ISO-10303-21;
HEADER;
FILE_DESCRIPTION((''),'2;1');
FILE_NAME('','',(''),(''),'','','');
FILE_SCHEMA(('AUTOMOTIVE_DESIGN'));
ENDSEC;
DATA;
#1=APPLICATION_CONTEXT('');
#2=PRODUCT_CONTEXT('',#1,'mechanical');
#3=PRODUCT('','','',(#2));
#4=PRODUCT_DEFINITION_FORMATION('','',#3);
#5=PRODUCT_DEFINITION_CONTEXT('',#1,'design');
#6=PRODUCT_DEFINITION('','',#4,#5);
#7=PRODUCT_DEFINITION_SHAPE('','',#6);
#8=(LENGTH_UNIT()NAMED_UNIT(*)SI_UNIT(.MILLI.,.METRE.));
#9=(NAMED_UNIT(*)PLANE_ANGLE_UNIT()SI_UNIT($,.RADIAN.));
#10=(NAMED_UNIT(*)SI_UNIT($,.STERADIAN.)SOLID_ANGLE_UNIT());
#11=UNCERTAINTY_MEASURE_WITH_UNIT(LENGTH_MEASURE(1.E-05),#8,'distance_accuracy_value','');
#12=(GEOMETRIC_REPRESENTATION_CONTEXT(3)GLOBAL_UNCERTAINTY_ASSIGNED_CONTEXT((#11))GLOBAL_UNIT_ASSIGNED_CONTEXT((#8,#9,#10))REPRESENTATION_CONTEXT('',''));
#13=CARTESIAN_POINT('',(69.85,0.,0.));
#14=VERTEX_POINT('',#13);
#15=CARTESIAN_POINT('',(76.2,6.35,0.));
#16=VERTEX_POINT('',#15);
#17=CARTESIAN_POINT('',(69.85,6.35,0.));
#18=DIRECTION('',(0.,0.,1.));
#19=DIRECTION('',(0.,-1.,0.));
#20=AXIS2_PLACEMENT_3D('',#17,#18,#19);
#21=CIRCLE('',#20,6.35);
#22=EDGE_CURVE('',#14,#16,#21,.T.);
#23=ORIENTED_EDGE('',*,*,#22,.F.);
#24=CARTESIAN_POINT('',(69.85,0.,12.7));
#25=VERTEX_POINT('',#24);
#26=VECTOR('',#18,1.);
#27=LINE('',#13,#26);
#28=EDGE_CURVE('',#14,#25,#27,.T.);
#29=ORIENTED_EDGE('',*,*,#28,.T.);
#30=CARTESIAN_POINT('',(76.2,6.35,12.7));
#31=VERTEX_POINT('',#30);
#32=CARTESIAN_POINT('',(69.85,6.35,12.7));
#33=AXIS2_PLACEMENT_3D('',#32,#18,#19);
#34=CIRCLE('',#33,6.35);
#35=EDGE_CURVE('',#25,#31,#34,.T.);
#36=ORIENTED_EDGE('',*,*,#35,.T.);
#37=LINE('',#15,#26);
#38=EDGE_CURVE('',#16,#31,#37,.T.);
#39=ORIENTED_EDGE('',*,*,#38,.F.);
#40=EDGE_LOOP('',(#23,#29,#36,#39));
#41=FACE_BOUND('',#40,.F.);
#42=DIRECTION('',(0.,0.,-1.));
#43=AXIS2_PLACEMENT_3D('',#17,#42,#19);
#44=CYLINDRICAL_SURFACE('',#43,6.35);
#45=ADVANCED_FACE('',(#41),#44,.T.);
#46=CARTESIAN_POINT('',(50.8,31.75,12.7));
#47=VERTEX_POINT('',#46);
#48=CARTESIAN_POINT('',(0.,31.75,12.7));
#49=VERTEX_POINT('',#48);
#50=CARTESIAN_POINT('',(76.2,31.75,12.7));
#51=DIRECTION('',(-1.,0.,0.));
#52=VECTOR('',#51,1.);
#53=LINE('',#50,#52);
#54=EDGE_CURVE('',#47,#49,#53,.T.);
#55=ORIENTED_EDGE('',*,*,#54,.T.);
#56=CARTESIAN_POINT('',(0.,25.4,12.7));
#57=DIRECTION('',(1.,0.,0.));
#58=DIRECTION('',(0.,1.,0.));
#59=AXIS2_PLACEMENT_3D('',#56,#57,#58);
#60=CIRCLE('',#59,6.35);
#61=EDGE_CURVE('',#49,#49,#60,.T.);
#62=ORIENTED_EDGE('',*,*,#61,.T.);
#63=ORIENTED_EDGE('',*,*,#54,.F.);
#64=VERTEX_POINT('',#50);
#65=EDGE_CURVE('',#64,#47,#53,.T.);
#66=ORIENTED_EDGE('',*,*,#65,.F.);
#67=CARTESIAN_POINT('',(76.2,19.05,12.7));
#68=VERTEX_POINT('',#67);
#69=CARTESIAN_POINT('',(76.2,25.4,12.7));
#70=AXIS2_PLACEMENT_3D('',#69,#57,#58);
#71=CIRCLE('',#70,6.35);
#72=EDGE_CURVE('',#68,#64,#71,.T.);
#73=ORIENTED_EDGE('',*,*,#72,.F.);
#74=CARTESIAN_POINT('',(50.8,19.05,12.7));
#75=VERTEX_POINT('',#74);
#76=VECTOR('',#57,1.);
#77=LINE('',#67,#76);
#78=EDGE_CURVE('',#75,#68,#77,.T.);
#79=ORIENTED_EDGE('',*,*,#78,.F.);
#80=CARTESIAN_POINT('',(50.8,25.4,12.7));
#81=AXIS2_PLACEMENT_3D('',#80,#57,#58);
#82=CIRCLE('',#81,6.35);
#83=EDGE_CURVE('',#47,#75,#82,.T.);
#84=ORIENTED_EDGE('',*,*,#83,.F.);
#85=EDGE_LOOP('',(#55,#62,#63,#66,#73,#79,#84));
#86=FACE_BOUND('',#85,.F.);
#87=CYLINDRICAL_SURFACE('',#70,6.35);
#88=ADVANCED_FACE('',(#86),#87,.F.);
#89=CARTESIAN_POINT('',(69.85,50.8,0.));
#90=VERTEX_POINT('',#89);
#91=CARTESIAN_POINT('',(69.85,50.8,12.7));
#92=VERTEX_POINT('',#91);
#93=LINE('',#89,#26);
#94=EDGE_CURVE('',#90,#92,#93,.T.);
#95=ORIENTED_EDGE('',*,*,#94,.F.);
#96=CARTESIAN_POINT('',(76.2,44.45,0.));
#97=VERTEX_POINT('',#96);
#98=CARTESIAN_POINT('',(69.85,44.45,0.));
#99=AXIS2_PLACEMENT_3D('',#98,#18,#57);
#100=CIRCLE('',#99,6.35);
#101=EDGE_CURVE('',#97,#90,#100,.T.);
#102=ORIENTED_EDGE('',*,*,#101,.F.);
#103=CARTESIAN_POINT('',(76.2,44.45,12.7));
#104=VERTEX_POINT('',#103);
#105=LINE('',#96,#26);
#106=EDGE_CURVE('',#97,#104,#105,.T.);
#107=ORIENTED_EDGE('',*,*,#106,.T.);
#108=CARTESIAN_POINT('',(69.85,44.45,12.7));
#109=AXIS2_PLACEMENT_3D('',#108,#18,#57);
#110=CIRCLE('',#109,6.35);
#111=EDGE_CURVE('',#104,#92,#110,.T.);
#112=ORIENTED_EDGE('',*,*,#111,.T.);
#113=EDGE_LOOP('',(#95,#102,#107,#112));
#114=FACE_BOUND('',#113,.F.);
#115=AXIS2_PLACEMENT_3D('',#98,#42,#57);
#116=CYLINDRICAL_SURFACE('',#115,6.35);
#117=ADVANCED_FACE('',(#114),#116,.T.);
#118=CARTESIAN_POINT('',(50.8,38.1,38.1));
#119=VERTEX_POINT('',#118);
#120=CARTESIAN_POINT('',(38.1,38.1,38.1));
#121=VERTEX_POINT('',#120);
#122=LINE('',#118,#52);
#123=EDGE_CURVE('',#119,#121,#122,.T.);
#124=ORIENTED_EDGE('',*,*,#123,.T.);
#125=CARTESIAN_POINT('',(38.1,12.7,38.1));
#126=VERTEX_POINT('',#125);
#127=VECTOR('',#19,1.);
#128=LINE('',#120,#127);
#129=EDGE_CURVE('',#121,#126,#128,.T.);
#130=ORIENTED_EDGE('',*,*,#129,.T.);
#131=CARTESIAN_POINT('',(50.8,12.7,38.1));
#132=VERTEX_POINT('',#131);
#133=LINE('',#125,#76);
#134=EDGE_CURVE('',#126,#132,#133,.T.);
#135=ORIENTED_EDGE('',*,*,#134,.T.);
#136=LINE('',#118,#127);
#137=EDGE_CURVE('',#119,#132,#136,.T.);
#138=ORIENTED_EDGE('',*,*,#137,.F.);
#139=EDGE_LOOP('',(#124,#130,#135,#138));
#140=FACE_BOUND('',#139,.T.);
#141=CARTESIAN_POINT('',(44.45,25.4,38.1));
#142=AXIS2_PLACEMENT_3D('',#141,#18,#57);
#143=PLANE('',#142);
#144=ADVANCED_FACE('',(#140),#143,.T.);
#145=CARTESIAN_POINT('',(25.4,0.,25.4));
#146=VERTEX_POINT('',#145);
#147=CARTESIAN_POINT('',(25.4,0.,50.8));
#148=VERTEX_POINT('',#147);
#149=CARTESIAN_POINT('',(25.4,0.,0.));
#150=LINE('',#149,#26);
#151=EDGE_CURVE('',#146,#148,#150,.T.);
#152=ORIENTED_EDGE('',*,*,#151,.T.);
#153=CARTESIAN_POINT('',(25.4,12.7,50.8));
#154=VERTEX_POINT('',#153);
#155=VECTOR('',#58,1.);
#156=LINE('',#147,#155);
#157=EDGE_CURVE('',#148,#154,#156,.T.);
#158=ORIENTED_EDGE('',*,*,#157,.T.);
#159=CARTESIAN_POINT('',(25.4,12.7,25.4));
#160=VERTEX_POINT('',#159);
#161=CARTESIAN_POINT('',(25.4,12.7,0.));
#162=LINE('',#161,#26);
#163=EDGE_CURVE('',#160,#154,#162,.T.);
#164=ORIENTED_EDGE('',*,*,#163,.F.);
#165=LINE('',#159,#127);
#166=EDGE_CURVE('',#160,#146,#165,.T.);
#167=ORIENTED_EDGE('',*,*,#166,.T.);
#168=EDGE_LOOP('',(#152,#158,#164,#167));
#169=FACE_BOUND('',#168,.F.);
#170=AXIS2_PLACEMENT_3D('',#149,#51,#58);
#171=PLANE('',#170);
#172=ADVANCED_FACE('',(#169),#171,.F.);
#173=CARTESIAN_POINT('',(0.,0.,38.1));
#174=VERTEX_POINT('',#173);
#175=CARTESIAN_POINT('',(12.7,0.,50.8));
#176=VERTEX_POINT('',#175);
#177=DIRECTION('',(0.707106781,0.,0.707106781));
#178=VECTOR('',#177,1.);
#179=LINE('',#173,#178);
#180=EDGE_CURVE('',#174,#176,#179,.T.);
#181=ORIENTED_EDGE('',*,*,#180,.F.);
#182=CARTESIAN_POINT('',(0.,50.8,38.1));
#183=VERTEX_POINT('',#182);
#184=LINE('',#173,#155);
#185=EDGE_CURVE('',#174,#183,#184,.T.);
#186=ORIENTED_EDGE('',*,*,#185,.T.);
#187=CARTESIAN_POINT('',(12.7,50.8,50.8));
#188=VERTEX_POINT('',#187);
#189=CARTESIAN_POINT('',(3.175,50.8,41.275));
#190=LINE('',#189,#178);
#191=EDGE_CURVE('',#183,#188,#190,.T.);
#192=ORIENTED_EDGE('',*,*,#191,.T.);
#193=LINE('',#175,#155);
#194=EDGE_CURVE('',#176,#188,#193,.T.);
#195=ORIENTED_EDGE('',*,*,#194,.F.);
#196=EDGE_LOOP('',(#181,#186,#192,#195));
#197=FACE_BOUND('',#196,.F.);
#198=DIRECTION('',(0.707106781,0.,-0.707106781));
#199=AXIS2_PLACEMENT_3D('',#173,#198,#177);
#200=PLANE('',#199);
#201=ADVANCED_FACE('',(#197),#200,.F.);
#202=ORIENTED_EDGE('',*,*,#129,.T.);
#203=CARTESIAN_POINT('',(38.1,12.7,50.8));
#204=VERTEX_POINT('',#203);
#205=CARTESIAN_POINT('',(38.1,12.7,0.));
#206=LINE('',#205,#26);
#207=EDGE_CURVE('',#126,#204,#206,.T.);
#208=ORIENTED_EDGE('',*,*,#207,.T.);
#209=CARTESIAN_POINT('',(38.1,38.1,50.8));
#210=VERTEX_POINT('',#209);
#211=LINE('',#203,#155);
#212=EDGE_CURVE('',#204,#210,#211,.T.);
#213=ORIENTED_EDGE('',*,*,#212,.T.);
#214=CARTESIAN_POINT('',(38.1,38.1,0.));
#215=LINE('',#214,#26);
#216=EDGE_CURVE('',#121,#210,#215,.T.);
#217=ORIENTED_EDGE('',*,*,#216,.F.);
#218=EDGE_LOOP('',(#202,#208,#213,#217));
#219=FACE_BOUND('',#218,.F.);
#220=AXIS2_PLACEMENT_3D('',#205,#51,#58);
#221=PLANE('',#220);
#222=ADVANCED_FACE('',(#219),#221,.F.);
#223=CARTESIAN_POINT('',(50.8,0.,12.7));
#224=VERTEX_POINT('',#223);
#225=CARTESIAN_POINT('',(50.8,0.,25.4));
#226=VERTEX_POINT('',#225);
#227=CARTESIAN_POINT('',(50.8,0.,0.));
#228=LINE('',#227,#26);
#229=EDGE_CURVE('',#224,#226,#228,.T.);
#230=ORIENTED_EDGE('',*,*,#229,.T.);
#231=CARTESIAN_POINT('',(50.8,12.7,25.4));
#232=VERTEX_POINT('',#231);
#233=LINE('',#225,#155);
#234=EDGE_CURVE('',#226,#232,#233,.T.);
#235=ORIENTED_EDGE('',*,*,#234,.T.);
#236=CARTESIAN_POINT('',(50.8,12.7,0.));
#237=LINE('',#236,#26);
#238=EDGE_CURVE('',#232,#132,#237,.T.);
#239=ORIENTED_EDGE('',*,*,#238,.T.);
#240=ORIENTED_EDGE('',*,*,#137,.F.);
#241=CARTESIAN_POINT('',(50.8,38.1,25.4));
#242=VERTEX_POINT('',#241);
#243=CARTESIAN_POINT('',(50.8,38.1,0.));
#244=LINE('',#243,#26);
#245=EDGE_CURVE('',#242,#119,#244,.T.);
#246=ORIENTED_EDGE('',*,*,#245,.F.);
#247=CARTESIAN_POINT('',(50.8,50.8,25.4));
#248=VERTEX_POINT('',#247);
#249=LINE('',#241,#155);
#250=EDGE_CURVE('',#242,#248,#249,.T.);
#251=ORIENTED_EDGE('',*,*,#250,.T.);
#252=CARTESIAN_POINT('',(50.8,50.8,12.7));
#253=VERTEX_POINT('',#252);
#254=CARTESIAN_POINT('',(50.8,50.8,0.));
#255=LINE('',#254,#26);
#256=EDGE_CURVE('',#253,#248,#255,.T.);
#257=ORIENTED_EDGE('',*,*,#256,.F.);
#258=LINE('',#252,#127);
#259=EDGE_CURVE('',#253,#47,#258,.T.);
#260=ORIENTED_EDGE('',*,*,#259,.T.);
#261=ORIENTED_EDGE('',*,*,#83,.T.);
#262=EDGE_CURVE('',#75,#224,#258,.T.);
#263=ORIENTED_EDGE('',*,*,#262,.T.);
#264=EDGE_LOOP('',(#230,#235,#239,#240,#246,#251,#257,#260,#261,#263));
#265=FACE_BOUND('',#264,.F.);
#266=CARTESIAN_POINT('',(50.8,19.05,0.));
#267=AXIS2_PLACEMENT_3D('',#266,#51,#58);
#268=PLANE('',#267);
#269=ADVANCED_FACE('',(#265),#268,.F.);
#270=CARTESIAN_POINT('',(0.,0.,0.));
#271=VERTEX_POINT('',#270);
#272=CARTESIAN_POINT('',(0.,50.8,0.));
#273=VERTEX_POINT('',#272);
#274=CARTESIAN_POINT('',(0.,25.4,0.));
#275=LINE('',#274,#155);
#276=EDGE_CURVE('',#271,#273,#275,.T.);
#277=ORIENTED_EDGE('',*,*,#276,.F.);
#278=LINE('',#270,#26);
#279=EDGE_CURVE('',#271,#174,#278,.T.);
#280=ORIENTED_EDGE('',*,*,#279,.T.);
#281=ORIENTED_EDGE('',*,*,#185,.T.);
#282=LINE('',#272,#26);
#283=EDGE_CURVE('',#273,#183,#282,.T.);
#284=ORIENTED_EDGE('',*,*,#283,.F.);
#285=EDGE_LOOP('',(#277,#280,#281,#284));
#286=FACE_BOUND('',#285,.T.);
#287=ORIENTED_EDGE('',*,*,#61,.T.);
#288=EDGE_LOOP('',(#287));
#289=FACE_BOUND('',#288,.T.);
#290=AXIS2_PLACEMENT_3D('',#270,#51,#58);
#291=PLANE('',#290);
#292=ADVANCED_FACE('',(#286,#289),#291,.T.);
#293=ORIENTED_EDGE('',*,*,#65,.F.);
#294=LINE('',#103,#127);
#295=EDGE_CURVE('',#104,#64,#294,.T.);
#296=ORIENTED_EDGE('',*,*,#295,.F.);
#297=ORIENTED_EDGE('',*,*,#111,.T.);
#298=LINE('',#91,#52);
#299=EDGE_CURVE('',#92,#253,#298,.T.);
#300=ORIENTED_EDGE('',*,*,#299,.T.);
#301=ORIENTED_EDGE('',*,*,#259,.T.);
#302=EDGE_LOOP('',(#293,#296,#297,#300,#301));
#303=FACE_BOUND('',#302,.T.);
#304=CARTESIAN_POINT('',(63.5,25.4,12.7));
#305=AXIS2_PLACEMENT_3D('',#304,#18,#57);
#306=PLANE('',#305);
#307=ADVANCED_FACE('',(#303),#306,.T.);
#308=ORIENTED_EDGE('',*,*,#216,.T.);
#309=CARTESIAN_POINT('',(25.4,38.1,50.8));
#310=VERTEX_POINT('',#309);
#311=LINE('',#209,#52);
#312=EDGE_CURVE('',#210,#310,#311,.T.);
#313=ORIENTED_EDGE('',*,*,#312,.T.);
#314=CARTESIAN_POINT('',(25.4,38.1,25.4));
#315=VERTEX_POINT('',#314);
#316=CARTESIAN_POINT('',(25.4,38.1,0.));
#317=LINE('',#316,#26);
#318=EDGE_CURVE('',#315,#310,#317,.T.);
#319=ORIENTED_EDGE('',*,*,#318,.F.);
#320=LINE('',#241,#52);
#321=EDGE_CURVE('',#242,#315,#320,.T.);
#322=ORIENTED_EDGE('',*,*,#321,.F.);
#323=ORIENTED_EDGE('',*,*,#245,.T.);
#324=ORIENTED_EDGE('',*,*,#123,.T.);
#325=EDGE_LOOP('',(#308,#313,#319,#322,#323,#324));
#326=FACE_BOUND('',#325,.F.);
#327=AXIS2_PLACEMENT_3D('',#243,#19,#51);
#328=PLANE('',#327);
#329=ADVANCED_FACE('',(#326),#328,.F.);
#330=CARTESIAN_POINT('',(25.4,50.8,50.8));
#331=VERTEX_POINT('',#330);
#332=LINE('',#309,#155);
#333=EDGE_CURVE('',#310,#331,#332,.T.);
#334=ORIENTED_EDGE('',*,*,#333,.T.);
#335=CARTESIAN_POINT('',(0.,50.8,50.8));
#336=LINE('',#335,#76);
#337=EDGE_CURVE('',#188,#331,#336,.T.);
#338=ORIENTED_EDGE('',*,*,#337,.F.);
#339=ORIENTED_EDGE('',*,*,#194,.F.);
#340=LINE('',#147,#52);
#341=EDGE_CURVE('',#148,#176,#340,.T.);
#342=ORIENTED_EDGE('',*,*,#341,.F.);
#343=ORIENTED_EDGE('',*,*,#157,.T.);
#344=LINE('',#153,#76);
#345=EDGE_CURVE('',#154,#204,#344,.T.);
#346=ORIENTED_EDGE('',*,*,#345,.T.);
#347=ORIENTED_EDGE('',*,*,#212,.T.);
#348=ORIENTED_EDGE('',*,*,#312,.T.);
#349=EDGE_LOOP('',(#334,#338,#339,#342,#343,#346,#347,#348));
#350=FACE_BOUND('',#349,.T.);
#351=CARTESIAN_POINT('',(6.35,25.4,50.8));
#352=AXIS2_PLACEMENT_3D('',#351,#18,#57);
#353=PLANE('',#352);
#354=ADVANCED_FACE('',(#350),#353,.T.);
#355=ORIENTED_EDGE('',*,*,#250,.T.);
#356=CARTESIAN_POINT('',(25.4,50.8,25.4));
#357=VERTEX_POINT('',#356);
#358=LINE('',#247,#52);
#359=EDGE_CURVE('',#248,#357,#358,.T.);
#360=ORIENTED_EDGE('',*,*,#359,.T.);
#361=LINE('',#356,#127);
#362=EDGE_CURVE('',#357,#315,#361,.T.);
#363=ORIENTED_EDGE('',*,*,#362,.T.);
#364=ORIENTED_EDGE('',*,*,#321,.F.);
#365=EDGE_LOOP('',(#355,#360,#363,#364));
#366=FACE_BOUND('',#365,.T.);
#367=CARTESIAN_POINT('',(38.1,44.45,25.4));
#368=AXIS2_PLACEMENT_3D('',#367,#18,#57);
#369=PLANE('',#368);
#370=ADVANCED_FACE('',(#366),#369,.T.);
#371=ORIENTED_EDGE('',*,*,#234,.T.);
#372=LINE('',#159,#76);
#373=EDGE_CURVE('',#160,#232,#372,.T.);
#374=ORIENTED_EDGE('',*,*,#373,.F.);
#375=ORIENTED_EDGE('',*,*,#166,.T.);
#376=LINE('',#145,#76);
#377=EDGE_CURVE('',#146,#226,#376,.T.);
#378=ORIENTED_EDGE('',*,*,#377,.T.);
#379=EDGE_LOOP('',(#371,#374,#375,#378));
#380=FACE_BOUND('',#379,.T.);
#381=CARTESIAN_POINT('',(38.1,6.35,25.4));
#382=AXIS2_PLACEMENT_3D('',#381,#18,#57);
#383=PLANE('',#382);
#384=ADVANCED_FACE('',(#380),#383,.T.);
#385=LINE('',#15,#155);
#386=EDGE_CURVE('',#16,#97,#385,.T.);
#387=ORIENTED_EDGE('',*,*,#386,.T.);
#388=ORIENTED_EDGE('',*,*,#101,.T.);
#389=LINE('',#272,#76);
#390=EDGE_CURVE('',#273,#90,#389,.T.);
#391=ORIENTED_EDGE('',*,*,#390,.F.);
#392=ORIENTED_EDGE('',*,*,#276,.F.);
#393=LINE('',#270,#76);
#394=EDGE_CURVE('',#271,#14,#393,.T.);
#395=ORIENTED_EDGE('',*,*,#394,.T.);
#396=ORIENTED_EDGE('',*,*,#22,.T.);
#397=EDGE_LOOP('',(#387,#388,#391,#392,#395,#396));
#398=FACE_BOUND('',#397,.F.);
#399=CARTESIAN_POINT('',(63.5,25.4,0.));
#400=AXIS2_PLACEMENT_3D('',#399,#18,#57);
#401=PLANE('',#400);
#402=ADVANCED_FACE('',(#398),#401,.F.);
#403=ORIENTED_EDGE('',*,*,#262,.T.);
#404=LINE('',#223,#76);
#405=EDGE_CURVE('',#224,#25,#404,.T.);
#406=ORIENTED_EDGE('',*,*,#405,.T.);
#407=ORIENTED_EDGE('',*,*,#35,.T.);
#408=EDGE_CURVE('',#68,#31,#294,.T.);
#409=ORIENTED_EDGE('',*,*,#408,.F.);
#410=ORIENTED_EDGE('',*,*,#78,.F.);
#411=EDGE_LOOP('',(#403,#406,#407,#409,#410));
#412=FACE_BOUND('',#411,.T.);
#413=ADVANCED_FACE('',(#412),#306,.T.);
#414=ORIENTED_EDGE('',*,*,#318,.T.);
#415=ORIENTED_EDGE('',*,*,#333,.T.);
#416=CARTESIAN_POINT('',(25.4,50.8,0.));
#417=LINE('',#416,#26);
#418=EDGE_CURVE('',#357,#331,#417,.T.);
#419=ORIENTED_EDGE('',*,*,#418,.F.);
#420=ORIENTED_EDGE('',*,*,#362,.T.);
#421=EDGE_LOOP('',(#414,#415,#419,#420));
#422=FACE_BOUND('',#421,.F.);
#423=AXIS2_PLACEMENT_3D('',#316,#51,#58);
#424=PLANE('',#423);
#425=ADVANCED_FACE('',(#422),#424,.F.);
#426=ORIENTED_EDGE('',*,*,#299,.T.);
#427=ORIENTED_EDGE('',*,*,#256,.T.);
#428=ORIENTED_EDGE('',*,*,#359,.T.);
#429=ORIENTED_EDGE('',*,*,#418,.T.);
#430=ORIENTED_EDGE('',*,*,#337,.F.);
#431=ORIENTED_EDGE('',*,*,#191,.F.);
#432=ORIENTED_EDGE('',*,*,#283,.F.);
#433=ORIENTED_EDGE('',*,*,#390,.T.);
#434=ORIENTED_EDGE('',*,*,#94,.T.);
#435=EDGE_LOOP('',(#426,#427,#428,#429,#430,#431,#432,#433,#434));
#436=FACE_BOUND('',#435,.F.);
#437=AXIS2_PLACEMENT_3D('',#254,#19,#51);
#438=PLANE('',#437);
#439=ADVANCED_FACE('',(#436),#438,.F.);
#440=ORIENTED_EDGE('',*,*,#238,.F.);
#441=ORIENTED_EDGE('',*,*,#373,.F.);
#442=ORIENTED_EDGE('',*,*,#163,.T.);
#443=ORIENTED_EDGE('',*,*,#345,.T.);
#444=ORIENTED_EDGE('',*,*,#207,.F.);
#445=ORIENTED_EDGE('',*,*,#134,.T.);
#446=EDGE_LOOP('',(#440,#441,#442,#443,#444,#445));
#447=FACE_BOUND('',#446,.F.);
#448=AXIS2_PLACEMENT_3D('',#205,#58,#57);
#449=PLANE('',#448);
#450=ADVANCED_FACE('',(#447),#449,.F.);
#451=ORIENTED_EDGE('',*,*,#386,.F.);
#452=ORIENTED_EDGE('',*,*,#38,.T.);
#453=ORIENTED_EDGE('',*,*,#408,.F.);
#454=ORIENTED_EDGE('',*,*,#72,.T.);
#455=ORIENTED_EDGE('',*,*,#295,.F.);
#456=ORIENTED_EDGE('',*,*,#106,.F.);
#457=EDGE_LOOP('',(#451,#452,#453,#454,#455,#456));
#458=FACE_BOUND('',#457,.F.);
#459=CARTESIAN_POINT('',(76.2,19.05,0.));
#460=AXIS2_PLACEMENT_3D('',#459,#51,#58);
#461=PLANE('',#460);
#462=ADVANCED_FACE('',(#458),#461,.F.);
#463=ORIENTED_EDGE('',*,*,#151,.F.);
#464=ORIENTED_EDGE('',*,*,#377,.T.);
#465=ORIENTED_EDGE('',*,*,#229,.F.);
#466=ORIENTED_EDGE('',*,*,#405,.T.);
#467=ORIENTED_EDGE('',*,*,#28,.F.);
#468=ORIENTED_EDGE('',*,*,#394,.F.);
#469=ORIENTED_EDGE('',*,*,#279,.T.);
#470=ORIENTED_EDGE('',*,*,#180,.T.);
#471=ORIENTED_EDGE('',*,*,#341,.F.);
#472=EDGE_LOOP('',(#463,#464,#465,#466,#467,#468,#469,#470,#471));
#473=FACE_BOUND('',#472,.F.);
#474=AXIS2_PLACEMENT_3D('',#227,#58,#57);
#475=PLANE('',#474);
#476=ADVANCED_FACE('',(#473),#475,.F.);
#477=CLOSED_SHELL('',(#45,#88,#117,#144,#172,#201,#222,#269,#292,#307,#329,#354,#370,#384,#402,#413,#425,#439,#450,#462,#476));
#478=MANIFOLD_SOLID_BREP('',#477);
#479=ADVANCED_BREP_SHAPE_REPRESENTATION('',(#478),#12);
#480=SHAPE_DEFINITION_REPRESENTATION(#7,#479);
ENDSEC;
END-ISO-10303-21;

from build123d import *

# Parameters (mm, degrees)
F1_DEPTH  = 25.4
F2_DEPTH  = 50.8
F0_W      = 12.7
F0_H      = 50.8
F3_DEPTH  = 50.8
F4_DEPTH  = 25.4
F5_DEPTH  = 12.7
F7_DEPTH  = 50.801
F8_DEPTH  = 38.1
F0_W_2    = 25.4
F0_H_2    = 12.7
F9_DEPTH  = 12.7
F10_DEPTH = 148
F11_DEPTH = 50.801
F12_DEPTH = 12.7
F13_R     = 6.35
F14_DEPTH = 76.201


# Not quite as in the source:
# - an extrude ends at something that could not be found from the text; its depth is read off the source's solid


with BuildPart() as f1:
    # F0 (on Top) → F1 (new body)
    with BuildSketch(Plane.XY):
        Polygon((25.4, 12.7), (25.4, 0), (50.8, 0), (50.8, 12.7), (38.1, 12.7), align=None)
    extrude(amount=F1_DEPTH)

    # F0 (on Top) → F2 (join)
    with BuildSketch(Plane.XY):
        Polygon((12.7, 50.8), (12.7, 0), (25.4, 0), (25.4, 12.7), (38.1, 12.7), (38.1, 38.1), (25.4, 38.1), (25.4, 50.8), align=None)
    extrude(amount=F2_DEPTH)

    # F0 (on Top) → F3 (join)
    with BuildSketch(Plane.XY):
        with Locations((6.35, 25.4)):
            Rectangle(F0_W, F0_H)
    extrude(amount=F3_DEPTH)

    # F0 (on Top) → F4 (join)
    with BuildSketch(Plane.XY):
        Polygon((50.8, 50.8), (25.4, 50.8), (25.4, 38.1), (38.1, 38.1), (50.8, 38.1), align=None)
    extrude(amount=F4_DEPTH)

    # F0 (on Top) → F5 (join)
    with BuildSketch(Plane.XY):
        with BuildLine():
            Line((50.8, 12.7), (50.8, 0))
            Line((50.8, 0), (69.85, 0))
            ThreePointArc((69.85, 0), (74.3401280605, 1.8598719395), (76.2, 6.35))
            Line((76.2, 6.35), (76.2, 19.05))
            Line((76.2, 19.05), (50.8, 19.05))
            Line((50.8, 19.05), (50.8, 12.7))
        make_face()
        with BuildLine():
            Line((69.85, 50.8), (50.8, 50.8))
            Line((50.8, 50.8), (50.8, 38.1))
            Line((50.8, 38.1), (50.8, 31.75))
            Line((50.8, 31.75), (76.2, 31.75))
            Line((76.2, 31.75), (76.2, 44.45))
            ThreePointArc((76.2, 44.45), (74.3401280605, 48.9401280605), (69.85, 50.8))
        make_face()
    extrude(amount=F5_DEPTH)

    # F6 (on face) → F7 (cut, through all)
    with BuildSketch(Plane.XZ):
        Polygon((12.7, 50.8), (0, 50.8), (0, 38.1), align=None)
    extrude(amount=-F7_DEPTH, mode=Mode.SUBTRACT)

    # F0 (on Top) → F8 (join)
    with BuildSketch(Plane.XY):
        Polygon((38.1, 12.7), (50.8, 12.7), (50.8, 19.05), (50.8, 31.75), (50.8, 38.1), (38.1, 38.1), align=None)
    extrude(amount=F8_DEPTH)

    # F0 (on Top) → F9 (join)
    with BuildSketch(Plane.XY):
        with Locations((63.5, 25.4)):
            Rectangle(F0_W_2, F0_H_2)
    extrude(amount=F9_DEPTH)

    # F0 (on Top) → F10 (cut, through all)
    with BuildSketch(Plane.XY):
        with Locations((63.5, 25.4)):
            Rectangle(F0_W_2, F0_H_2)
    extrude(amount=-F10_DEPTH, mode=Mode.SUBTRACT)

    # F0 (on Top) → F11 (cut, through all)
    with BuildSketch(Plane.XY):
        with Locations((63.5, 25.4)):
            Rectangle(F0_W_2, F0_H_2)
    extrude(amount=F11_DEPTH, mode=Mode.SUBTRACT)

    # F0 (on Top) → F12 (join)
    with BuildSketch(Plane.XY):
        with Locations((63.5, 25.4)):
            Rectangle(F0_W_2, F0_H_2)
    extrude(amount=F12_DEPTH)

    # F13 (on face) → F14 (cut, through all)
    with BuildSketch(Plane.YZ.offset(76.2)):
        with Locations((25.4, 12.7)):
            Circle(F13_R)
    extrude(amount=-F14_DEPTH, mode=Mode.SUBTRACT)


solid = f1.part
